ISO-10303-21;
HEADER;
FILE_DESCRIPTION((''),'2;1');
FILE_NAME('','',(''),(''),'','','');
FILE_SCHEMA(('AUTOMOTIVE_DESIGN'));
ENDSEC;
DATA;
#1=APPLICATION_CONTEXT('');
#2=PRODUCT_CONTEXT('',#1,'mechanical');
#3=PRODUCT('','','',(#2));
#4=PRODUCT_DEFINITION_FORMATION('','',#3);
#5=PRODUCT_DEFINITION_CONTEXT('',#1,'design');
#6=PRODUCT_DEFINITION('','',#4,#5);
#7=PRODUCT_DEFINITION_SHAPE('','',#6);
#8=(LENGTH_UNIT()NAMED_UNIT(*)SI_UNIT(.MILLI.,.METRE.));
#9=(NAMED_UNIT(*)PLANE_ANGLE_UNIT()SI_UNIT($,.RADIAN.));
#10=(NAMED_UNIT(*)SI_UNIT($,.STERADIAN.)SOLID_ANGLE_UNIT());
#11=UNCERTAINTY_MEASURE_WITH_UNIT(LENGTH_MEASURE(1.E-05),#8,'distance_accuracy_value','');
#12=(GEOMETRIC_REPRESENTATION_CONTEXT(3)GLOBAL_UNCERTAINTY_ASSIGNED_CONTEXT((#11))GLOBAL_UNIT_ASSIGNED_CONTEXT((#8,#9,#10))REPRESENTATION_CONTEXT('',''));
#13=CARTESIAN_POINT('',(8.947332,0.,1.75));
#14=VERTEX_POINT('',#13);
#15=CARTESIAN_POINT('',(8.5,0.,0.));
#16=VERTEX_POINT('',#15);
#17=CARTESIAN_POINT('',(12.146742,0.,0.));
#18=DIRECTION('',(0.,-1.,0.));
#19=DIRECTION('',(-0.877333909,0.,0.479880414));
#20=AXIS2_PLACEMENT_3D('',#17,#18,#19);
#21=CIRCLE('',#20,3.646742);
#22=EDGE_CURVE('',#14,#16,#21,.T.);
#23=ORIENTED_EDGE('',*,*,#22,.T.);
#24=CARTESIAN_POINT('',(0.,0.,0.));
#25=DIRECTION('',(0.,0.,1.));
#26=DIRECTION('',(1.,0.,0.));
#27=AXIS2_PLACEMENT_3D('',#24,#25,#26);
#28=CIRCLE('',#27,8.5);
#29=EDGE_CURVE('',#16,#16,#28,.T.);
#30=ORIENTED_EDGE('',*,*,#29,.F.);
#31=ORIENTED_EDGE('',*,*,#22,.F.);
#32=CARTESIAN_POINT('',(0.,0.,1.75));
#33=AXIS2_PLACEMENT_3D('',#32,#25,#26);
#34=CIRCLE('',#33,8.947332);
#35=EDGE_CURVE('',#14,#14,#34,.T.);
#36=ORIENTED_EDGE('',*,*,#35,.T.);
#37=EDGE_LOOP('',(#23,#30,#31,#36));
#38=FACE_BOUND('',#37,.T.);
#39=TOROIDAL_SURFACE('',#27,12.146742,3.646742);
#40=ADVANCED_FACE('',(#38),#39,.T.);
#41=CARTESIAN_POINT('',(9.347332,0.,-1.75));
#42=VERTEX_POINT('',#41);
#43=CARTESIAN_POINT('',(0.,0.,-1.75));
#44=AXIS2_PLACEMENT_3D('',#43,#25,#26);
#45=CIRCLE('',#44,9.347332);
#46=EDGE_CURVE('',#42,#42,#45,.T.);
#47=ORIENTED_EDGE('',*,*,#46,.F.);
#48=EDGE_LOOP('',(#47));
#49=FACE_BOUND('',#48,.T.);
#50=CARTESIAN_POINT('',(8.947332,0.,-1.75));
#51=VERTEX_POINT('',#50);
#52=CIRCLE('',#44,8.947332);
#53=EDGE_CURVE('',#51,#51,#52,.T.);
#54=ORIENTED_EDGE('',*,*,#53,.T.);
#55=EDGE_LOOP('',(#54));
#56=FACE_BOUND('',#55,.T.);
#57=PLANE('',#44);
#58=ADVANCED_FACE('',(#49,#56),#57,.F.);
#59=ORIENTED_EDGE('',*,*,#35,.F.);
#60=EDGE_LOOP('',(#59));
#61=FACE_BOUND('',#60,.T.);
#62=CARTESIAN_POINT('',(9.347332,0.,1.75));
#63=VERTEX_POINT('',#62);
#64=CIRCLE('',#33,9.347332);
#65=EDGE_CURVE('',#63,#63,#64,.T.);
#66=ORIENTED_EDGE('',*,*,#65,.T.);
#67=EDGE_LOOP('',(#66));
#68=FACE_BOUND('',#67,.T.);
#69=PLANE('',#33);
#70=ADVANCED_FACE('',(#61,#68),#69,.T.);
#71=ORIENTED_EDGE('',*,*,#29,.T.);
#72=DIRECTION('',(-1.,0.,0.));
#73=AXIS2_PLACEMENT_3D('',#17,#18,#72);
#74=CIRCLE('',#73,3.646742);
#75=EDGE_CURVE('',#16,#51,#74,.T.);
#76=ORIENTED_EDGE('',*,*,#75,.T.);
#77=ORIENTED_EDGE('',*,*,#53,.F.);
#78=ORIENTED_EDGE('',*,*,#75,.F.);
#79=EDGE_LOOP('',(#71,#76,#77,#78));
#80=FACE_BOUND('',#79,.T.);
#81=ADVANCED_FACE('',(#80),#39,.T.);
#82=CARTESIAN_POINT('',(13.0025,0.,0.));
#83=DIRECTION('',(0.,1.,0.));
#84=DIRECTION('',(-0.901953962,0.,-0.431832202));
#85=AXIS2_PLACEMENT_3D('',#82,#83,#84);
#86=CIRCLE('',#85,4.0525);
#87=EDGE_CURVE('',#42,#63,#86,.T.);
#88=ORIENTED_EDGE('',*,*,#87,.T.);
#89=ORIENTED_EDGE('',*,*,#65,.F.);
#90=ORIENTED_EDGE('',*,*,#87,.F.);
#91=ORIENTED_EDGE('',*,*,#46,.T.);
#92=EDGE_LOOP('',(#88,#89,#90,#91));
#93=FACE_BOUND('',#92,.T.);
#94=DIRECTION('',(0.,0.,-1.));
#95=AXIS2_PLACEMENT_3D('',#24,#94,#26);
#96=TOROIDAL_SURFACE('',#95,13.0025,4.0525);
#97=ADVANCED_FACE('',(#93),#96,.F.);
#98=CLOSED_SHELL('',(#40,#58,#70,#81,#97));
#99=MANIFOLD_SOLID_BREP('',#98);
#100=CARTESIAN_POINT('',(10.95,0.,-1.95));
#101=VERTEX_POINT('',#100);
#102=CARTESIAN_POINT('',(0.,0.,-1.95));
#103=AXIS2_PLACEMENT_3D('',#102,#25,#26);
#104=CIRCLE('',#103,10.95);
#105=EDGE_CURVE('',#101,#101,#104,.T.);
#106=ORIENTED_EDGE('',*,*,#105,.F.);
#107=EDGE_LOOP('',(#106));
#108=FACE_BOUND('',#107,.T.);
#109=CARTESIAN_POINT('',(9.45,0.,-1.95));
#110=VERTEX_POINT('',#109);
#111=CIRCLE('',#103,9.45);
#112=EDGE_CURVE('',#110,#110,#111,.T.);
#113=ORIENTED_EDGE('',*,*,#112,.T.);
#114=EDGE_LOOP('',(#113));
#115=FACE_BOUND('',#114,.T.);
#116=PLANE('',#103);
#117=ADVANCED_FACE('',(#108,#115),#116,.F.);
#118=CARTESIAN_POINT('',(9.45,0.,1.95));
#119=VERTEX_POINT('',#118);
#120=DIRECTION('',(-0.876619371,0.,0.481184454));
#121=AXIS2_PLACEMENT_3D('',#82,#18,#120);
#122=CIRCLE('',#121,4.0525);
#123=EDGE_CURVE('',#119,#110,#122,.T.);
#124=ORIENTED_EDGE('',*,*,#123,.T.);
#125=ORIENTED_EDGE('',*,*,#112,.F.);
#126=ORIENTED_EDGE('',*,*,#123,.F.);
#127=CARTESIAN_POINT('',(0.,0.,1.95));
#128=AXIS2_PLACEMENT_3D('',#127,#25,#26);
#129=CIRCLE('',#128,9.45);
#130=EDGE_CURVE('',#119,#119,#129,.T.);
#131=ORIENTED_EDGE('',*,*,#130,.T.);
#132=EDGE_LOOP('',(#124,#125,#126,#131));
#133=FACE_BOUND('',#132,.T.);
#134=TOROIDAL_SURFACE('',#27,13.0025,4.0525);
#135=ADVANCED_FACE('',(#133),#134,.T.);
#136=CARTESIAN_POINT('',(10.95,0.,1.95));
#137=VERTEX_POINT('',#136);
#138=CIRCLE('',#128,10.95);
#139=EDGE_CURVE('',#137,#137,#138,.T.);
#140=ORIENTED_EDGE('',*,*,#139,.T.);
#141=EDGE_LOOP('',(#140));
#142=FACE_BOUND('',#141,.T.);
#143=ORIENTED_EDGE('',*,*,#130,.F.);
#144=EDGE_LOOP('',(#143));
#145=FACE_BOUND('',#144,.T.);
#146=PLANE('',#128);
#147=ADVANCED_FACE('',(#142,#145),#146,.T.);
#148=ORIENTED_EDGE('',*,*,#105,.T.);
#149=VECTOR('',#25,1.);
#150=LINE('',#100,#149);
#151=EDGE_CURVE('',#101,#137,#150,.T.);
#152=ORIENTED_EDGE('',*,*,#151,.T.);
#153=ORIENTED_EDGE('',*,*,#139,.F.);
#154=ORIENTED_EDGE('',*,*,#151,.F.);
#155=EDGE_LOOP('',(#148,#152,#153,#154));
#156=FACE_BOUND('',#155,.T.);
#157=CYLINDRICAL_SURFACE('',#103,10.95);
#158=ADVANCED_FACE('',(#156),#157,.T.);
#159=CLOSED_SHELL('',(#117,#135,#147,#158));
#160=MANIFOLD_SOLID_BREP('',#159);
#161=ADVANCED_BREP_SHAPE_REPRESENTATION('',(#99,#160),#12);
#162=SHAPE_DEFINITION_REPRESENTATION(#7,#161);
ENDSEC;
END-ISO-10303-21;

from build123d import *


# Not quite as in the source:
# - a feature of the source that left no trace in its solid (it failed there, or was rolled back) is left out


with BuildPart() as f1:
    # F0 (on Front) → F1 (revolve)
    with BuildSketch(Plane.XZ):
        with BuildLine():
            Line((10.95, 1.95), (9.45, 1.95))
            ThreePointArc((9.45, 1.95), (8.95, 0), (9.45, -1.95))
            Line((9.45, -1.95), (10.95, -1.95))
            Line((10.95, -1.95), (10.95, 1.95))
        make_face()
    revolve(axis=Axis((0, 0, 0.975), (0, 0, 1)))


with BuildPart() as f4:
    # F3 (on face) → F4 (revolve)
    with BuildSketch(Plane.XZ):
        with BuildLine():
            Line((8.9473315702, -1.75), (9.3473315702, -1.75))
            ThreePointArc((9.3473315702, -1.75), (8.95, 0), (9.3473315702, 1.75))
            Line((9.3473315702, 1.75), (8.9473315702, 1.75))
            ThreePointArc((8.9473315702, 1.75), (8.6136023479, 0.9031342001), (8.5, 0))
            ThreePointArc((8.5, 0), (8.6136023479, -0.9031342001), (8.9473315702, -1.75))
        make_face()
    revolve(axis=Axis((0, 0, 0.975), (0, 0, 1)))


solid = Compound([f1.part, f4.part])
